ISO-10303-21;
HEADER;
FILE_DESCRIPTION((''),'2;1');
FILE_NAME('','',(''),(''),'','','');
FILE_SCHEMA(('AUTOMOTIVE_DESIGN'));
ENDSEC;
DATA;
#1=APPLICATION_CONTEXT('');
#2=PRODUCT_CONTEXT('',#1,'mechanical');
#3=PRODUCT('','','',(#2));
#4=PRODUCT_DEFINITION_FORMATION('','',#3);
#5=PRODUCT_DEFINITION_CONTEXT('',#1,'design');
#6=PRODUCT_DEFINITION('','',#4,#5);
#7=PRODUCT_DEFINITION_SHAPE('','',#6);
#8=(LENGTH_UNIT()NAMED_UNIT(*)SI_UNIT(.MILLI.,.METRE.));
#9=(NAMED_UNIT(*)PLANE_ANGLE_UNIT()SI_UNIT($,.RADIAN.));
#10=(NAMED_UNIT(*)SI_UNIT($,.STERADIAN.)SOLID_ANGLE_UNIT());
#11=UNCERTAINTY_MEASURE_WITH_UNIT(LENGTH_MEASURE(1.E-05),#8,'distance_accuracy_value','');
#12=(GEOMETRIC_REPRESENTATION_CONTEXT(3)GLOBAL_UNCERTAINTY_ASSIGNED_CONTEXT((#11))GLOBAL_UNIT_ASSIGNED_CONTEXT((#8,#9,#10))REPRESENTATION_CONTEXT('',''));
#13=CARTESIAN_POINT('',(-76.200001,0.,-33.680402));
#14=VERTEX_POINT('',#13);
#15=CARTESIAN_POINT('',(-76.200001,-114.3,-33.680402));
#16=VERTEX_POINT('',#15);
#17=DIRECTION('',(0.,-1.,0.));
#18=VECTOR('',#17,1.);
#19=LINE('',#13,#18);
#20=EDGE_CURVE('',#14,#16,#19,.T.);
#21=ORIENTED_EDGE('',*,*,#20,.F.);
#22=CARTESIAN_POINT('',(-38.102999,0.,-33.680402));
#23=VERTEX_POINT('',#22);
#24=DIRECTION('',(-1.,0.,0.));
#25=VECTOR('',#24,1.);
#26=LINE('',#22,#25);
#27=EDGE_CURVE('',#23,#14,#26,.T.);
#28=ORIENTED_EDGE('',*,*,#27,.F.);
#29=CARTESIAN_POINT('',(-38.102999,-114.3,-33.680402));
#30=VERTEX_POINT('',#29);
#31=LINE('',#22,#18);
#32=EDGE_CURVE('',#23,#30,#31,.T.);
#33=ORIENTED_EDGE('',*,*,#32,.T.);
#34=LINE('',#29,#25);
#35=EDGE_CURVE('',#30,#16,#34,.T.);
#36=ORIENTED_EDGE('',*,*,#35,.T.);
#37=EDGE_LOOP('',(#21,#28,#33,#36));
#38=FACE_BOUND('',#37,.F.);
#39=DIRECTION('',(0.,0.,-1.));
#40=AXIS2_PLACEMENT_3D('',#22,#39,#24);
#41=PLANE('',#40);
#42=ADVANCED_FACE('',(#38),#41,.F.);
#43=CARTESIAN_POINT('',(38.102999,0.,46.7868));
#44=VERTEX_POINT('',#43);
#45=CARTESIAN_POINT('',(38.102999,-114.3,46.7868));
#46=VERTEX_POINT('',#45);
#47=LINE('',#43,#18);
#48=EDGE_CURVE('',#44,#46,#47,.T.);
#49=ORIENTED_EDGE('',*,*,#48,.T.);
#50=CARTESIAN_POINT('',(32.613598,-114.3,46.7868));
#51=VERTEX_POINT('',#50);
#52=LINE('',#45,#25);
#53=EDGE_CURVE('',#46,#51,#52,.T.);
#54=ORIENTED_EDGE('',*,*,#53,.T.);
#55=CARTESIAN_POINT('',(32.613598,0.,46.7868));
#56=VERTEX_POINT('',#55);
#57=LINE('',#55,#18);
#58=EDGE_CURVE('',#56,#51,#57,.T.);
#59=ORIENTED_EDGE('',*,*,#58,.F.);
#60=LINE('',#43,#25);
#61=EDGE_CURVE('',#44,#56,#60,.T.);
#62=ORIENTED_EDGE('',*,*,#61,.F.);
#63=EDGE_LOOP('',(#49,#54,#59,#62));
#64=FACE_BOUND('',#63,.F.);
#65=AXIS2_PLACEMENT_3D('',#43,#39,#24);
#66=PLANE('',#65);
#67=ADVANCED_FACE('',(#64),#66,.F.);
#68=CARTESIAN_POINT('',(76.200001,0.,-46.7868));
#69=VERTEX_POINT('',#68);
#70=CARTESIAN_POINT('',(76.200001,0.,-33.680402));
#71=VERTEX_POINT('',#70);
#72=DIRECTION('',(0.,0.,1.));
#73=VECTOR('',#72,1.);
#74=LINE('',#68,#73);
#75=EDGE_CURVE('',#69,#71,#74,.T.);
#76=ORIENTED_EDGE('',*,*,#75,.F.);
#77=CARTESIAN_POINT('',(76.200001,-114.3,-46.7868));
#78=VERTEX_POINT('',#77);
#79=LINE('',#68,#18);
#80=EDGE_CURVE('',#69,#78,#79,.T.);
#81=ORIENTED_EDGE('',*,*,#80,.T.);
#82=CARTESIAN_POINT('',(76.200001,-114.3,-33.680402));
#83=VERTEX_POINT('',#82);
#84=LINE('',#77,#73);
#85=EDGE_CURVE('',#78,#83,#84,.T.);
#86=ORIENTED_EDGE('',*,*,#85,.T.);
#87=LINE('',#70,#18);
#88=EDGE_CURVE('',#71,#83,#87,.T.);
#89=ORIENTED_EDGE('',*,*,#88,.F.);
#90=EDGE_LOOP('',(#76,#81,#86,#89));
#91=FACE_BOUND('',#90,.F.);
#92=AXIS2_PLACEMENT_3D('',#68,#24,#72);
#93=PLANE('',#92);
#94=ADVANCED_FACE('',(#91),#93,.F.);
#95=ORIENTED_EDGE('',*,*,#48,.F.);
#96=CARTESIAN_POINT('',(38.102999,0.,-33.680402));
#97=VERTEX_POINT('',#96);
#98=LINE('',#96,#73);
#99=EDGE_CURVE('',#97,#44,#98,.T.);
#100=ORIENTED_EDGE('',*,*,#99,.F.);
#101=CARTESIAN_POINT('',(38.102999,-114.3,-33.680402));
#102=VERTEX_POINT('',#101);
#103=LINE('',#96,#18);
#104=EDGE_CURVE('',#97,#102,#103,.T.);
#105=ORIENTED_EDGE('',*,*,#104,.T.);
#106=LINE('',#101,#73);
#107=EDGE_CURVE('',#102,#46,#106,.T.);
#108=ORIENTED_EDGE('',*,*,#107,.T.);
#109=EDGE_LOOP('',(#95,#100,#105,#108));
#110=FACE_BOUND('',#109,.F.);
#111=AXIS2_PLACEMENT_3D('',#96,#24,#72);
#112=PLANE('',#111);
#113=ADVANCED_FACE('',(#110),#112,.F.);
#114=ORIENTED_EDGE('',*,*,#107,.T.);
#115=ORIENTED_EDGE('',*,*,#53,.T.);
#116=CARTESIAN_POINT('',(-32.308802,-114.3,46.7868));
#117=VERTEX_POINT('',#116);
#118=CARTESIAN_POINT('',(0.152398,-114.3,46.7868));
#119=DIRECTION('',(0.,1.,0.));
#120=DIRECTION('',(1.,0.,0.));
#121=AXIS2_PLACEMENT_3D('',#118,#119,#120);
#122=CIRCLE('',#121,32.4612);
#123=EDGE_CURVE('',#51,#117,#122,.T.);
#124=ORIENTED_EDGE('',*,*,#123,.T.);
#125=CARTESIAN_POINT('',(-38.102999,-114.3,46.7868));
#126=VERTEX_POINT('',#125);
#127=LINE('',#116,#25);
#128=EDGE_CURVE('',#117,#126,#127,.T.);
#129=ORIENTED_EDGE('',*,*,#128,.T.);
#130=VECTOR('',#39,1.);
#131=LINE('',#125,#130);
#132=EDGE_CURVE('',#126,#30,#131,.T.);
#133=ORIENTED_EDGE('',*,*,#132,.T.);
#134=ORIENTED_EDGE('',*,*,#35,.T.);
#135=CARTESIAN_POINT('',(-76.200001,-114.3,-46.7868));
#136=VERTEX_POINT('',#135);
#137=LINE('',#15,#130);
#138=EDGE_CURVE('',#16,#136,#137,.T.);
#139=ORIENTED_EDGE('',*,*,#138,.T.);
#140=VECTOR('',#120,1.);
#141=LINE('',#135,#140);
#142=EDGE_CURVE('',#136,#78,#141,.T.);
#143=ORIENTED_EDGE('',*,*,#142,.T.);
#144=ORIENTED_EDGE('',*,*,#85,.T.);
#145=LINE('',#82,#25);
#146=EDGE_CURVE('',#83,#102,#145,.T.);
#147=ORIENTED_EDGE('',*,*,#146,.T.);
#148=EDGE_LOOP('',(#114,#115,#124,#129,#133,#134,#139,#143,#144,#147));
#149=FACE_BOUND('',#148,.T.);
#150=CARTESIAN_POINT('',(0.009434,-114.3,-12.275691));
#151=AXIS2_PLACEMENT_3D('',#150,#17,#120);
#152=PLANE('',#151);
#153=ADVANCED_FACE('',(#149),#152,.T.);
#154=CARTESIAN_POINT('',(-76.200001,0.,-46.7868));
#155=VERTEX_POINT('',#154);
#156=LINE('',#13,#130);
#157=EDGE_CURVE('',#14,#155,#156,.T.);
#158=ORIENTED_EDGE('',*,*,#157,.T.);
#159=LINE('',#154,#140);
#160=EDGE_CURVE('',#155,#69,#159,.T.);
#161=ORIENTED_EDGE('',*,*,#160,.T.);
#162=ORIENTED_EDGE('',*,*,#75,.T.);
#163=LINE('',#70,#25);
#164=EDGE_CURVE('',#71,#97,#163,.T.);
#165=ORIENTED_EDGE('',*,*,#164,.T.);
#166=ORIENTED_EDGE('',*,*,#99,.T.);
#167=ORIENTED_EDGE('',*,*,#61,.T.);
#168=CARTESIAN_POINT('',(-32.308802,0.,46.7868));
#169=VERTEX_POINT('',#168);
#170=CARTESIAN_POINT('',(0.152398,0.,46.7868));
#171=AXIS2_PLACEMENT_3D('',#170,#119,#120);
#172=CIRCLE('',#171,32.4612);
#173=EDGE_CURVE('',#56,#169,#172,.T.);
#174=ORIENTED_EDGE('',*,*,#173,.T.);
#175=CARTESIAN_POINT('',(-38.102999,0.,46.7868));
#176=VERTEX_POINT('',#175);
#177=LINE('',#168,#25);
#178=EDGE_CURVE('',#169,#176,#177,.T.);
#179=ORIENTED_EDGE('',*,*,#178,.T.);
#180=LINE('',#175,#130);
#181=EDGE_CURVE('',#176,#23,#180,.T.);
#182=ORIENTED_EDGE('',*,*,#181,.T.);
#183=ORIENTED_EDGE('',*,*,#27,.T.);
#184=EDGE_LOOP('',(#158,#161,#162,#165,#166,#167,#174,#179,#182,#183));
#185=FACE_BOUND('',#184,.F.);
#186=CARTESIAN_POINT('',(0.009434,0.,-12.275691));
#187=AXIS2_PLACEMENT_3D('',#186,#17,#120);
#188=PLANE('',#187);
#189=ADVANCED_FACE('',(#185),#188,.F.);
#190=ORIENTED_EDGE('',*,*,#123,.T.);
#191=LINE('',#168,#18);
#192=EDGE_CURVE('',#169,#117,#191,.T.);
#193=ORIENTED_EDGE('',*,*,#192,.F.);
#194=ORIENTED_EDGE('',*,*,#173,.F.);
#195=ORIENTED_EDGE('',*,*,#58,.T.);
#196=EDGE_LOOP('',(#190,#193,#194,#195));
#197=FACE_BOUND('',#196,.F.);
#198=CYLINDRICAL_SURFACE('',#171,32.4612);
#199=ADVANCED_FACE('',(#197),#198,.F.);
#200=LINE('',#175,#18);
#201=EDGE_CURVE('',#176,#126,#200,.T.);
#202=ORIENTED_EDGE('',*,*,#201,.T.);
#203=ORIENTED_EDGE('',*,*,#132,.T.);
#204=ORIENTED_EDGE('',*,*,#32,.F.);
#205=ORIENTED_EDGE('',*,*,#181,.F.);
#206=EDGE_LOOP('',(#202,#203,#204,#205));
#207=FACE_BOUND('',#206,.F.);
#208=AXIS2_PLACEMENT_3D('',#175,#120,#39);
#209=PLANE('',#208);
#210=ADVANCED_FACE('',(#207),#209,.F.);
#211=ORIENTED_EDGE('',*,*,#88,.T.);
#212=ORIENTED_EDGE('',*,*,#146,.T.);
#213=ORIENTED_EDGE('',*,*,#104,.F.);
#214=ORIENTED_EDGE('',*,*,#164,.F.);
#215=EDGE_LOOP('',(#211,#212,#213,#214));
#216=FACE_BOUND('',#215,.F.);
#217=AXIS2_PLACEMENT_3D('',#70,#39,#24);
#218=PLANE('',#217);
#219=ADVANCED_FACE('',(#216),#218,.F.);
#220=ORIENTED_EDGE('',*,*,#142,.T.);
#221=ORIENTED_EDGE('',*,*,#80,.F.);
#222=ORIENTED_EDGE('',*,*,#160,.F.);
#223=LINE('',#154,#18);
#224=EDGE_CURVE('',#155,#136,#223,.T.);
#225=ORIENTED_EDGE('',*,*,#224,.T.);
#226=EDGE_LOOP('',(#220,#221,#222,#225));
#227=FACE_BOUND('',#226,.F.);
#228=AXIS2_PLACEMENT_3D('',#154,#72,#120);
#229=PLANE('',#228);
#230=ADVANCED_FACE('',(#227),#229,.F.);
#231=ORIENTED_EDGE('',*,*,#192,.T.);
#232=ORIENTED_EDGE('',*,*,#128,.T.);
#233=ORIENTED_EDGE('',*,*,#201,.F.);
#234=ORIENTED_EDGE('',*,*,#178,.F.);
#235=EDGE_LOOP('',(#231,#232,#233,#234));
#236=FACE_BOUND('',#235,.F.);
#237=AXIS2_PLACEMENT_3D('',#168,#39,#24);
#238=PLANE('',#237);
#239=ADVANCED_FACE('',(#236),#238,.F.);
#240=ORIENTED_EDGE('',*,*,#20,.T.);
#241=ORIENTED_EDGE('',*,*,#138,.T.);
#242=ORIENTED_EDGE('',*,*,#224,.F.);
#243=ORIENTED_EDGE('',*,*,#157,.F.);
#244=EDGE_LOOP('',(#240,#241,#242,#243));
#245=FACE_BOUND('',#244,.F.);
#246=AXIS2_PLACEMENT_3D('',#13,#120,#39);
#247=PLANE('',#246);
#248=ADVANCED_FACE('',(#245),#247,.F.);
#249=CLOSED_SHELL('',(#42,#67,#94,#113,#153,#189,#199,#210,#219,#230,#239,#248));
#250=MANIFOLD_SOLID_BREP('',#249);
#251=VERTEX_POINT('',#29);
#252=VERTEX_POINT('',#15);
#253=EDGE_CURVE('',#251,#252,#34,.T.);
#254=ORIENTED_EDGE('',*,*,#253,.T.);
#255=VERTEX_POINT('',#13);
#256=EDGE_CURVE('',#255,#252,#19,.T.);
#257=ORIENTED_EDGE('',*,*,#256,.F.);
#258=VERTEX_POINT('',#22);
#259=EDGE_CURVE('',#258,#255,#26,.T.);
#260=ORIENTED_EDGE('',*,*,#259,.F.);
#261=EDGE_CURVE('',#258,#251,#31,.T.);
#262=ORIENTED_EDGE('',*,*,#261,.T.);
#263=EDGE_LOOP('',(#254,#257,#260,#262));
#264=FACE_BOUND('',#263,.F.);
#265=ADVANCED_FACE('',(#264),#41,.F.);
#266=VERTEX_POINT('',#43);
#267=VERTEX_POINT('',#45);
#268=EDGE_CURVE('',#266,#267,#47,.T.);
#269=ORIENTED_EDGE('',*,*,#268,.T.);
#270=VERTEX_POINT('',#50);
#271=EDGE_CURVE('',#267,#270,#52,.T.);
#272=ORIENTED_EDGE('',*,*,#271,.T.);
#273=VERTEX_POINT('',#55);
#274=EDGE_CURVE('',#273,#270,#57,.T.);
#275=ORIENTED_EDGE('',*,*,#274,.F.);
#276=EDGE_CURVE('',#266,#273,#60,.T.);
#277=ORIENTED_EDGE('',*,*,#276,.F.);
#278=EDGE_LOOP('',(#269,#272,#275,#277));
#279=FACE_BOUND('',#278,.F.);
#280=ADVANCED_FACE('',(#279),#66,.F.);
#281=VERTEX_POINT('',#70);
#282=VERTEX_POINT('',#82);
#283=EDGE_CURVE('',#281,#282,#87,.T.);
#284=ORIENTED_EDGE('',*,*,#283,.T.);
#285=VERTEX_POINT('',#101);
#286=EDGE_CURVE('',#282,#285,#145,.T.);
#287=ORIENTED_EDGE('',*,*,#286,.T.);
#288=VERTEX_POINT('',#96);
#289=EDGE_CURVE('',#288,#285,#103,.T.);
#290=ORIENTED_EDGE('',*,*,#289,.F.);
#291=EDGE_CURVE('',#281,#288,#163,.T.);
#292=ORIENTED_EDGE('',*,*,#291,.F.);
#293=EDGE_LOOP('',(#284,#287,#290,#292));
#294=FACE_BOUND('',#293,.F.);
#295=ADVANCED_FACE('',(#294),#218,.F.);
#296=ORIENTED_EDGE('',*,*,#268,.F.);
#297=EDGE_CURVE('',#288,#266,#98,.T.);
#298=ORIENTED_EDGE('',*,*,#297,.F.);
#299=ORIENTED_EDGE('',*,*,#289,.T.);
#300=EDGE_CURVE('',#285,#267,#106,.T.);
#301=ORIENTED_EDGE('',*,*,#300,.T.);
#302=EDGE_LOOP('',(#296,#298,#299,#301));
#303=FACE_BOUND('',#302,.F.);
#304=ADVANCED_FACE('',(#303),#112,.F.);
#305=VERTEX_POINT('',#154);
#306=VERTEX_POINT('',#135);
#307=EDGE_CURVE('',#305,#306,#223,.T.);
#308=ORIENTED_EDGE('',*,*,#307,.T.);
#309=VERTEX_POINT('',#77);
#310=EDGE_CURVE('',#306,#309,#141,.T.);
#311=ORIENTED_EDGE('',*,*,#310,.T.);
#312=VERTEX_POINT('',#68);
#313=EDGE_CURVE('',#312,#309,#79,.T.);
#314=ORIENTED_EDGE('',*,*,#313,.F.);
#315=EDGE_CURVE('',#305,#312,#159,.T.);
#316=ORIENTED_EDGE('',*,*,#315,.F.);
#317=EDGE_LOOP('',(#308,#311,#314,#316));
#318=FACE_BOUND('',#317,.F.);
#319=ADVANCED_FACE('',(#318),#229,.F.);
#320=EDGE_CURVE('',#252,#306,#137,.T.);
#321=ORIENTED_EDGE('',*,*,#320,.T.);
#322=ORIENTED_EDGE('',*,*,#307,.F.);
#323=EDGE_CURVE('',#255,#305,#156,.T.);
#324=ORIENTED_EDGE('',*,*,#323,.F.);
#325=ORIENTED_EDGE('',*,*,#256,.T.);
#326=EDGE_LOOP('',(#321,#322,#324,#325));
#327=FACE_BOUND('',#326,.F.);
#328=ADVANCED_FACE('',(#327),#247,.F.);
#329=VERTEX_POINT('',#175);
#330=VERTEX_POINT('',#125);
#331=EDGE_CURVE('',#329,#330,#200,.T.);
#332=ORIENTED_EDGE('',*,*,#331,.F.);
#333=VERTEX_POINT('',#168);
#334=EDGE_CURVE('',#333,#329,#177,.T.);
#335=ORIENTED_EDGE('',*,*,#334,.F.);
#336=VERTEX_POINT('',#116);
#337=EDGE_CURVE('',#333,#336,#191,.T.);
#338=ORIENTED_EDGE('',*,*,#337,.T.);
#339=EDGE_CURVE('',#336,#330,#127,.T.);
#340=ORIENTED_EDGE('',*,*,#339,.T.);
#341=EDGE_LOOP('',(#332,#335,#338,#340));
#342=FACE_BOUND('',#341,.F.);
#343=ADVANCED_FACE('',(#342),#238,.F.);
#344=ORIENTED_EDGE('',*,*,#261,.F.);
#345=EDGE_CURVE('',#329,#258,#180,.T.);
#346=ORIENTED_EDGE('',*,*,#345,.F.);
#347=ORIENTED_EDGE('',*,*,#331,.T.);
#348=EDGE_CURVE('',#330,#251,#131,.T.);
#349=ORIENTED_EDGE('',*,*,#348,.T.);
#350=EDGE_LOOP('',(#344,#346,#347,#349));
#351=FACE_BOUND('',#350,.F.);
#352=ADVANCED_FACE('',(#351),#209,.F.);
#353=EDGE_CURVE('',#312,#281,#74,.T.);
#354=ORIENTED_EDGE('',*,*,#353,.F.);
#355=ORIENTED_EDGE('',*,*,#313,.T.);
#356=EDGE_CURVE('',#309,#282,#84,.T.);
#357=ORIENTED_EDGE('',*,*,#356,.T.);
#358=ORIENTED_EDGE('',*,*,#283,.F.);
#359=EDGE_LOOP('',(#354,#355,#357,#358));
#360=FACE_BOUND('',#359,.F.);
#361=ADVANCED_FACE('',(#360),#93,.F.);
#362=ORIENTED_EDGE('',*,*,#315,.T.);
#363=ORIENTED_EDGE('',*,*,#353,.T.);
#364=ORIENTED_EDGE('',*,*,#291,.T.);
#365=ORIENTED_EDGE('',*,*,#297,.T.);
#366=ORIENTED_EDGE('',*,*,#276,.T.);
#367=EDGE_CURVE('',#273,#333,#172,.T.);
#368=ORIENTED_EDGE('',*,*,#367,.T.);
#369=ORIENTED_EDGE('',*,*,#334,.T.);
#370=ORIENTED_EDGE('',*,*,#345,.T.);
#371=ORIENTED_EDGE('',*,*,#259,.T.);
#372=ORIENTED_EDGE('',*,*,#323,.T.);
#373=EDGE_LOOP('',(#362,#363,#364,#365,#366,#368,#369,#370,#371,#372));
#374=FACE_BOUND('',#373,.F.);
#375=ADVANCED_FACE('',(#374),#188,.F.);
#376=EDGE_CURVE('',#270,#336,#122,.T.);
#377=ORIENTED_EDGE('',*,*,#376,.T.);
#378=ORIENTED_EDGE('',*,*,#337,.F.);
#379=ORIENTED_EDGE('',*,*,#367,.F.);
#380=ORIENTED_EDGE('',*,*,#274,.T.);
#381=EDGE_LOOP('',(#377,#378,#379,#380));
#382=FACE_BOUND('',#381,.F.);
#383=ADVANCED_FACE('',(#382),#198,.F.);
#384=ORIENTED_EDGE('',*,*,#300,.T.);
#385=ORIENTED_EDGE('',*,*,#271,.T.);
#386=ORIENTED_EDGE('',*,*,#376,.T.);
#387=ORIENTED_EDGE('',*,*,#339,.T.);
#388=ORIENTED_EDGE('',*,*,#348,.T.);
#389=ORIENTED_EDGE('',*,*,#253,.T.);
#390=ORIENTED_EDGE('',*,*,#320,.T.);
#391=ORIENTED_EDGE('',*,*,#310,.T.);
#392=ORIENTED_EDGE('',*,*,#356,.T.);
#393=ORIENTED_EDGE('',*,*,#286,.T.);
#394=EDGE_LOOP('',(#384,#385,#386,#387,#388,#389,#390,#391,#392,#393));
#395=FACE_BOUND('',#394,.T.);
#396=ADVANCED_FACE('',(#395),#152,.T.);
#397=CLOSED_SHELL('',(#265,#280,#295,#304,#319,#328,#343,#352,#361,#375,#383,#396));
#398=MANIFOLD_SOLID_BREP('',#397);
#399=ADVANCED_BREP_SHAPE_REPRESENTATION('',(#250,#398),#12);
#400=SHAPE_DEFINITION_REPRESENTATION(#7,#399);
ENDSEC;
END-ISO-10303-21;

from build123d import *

# Parameters (mm, degrees)
F1_DEPTH = 114.3
F2_DEPTH = 114.3


# Not quite as in the source:
# - a feature names something its author has since deleted; it is built from what else it names


with BuildPart() as f1:
    # F0 (on Front) → F1 (new body)
    with BuildSketch(Plane.XZ):
        with BuildLine():
            Line((-32.3088020086, 46.7868000269), (-38.1029994101, 46.7868000269))
            Line((-38.1029994101, 46.7868000269), (-38.1029994101, -33.6804017425))
            Line((-38.1029994101, -33.6804017425), (-76.2000009418, -33.6804017425))
            Line((-76.2000009418, -33.6804017425), (-76.2000009418, -46.7868000269))
            Line((-76.2000009418, -46.7868000269), (-38.1029994101, -46.7868000269))
            Line((-38.1029994101, -46.7868000269), (38.1029994101, -46.7868000269))
            Line((38.1029994101, -46.7868000269), (76.2000009418, -46.7868000269))
            Line((76.2000009418, -46.7868000269), (76.2000009418, -33.6804017425))
            Line((76.2000009418, -33.6804017425), (38.1029994101, -33.6804017425))
            Line((38.1029994101, -33.6804017425), (38.1029994101, 46.7868000269))
            Line((38.1029994101, 46.7868000269), (32.6135978103, 46.7868000269))
            ThreePointArc((32.6135978103, 46.7868000269), (0.1523979008, 14.3256001174), (-32.3088020086, 46.7868000269))
        make_face()
    extrude(amount=F1_DEPTH)


with BuildPart() as f2:
    # F0 (on Front) → F2 (new body)
    with BuildSketch(Plane.XZ):
        with BuildLine():
            Line((-32.3088020086, 46.7868000269), (-38.1029994101, 46.7868000269))
            Line((-38.1029994101, 46.7868000269), (-38.1029994101, -33.6804017425))
            Line((-38.1029994101, -33.6804017425), (-76.2000009418, -33.6804017425))
            Line((-76.2000009418, -33.6804017425), (-76.2000009418, -46.7868000269))
            Line((-76.2000009418, -46.7868000269), (-38.1029994101, -46.7868000269))
            Line((-38.1029994101, -46.7868000269), (38.1029994101, -46.7868000269))
            Line((38.1029994101, -46.7868000269), (76.2000009418, -46.7868000269))
            Line((76.2000009418, -46.7868000269), (76.2000009418, -33.6804017425))
            Line((76.2000009418, -33.6804017425), (38.1029994101, -33.6804017425))
            Line((38.1029994101, -33.6804017425), (38.1029994101, 46.7868000269))
            Line((38.1029994101, 46.7868000269), (32.6135978103, 46.7868000269))
            ThreePointArc((32.6135978103, 46.7868000269), (0.1523979008, 14.3256001174), (-32.3088020086, 46.7868000269))
        make_face()
    extrude(amount=F2_DEPTH)


solid = Compound([f1.part, f2.part])
